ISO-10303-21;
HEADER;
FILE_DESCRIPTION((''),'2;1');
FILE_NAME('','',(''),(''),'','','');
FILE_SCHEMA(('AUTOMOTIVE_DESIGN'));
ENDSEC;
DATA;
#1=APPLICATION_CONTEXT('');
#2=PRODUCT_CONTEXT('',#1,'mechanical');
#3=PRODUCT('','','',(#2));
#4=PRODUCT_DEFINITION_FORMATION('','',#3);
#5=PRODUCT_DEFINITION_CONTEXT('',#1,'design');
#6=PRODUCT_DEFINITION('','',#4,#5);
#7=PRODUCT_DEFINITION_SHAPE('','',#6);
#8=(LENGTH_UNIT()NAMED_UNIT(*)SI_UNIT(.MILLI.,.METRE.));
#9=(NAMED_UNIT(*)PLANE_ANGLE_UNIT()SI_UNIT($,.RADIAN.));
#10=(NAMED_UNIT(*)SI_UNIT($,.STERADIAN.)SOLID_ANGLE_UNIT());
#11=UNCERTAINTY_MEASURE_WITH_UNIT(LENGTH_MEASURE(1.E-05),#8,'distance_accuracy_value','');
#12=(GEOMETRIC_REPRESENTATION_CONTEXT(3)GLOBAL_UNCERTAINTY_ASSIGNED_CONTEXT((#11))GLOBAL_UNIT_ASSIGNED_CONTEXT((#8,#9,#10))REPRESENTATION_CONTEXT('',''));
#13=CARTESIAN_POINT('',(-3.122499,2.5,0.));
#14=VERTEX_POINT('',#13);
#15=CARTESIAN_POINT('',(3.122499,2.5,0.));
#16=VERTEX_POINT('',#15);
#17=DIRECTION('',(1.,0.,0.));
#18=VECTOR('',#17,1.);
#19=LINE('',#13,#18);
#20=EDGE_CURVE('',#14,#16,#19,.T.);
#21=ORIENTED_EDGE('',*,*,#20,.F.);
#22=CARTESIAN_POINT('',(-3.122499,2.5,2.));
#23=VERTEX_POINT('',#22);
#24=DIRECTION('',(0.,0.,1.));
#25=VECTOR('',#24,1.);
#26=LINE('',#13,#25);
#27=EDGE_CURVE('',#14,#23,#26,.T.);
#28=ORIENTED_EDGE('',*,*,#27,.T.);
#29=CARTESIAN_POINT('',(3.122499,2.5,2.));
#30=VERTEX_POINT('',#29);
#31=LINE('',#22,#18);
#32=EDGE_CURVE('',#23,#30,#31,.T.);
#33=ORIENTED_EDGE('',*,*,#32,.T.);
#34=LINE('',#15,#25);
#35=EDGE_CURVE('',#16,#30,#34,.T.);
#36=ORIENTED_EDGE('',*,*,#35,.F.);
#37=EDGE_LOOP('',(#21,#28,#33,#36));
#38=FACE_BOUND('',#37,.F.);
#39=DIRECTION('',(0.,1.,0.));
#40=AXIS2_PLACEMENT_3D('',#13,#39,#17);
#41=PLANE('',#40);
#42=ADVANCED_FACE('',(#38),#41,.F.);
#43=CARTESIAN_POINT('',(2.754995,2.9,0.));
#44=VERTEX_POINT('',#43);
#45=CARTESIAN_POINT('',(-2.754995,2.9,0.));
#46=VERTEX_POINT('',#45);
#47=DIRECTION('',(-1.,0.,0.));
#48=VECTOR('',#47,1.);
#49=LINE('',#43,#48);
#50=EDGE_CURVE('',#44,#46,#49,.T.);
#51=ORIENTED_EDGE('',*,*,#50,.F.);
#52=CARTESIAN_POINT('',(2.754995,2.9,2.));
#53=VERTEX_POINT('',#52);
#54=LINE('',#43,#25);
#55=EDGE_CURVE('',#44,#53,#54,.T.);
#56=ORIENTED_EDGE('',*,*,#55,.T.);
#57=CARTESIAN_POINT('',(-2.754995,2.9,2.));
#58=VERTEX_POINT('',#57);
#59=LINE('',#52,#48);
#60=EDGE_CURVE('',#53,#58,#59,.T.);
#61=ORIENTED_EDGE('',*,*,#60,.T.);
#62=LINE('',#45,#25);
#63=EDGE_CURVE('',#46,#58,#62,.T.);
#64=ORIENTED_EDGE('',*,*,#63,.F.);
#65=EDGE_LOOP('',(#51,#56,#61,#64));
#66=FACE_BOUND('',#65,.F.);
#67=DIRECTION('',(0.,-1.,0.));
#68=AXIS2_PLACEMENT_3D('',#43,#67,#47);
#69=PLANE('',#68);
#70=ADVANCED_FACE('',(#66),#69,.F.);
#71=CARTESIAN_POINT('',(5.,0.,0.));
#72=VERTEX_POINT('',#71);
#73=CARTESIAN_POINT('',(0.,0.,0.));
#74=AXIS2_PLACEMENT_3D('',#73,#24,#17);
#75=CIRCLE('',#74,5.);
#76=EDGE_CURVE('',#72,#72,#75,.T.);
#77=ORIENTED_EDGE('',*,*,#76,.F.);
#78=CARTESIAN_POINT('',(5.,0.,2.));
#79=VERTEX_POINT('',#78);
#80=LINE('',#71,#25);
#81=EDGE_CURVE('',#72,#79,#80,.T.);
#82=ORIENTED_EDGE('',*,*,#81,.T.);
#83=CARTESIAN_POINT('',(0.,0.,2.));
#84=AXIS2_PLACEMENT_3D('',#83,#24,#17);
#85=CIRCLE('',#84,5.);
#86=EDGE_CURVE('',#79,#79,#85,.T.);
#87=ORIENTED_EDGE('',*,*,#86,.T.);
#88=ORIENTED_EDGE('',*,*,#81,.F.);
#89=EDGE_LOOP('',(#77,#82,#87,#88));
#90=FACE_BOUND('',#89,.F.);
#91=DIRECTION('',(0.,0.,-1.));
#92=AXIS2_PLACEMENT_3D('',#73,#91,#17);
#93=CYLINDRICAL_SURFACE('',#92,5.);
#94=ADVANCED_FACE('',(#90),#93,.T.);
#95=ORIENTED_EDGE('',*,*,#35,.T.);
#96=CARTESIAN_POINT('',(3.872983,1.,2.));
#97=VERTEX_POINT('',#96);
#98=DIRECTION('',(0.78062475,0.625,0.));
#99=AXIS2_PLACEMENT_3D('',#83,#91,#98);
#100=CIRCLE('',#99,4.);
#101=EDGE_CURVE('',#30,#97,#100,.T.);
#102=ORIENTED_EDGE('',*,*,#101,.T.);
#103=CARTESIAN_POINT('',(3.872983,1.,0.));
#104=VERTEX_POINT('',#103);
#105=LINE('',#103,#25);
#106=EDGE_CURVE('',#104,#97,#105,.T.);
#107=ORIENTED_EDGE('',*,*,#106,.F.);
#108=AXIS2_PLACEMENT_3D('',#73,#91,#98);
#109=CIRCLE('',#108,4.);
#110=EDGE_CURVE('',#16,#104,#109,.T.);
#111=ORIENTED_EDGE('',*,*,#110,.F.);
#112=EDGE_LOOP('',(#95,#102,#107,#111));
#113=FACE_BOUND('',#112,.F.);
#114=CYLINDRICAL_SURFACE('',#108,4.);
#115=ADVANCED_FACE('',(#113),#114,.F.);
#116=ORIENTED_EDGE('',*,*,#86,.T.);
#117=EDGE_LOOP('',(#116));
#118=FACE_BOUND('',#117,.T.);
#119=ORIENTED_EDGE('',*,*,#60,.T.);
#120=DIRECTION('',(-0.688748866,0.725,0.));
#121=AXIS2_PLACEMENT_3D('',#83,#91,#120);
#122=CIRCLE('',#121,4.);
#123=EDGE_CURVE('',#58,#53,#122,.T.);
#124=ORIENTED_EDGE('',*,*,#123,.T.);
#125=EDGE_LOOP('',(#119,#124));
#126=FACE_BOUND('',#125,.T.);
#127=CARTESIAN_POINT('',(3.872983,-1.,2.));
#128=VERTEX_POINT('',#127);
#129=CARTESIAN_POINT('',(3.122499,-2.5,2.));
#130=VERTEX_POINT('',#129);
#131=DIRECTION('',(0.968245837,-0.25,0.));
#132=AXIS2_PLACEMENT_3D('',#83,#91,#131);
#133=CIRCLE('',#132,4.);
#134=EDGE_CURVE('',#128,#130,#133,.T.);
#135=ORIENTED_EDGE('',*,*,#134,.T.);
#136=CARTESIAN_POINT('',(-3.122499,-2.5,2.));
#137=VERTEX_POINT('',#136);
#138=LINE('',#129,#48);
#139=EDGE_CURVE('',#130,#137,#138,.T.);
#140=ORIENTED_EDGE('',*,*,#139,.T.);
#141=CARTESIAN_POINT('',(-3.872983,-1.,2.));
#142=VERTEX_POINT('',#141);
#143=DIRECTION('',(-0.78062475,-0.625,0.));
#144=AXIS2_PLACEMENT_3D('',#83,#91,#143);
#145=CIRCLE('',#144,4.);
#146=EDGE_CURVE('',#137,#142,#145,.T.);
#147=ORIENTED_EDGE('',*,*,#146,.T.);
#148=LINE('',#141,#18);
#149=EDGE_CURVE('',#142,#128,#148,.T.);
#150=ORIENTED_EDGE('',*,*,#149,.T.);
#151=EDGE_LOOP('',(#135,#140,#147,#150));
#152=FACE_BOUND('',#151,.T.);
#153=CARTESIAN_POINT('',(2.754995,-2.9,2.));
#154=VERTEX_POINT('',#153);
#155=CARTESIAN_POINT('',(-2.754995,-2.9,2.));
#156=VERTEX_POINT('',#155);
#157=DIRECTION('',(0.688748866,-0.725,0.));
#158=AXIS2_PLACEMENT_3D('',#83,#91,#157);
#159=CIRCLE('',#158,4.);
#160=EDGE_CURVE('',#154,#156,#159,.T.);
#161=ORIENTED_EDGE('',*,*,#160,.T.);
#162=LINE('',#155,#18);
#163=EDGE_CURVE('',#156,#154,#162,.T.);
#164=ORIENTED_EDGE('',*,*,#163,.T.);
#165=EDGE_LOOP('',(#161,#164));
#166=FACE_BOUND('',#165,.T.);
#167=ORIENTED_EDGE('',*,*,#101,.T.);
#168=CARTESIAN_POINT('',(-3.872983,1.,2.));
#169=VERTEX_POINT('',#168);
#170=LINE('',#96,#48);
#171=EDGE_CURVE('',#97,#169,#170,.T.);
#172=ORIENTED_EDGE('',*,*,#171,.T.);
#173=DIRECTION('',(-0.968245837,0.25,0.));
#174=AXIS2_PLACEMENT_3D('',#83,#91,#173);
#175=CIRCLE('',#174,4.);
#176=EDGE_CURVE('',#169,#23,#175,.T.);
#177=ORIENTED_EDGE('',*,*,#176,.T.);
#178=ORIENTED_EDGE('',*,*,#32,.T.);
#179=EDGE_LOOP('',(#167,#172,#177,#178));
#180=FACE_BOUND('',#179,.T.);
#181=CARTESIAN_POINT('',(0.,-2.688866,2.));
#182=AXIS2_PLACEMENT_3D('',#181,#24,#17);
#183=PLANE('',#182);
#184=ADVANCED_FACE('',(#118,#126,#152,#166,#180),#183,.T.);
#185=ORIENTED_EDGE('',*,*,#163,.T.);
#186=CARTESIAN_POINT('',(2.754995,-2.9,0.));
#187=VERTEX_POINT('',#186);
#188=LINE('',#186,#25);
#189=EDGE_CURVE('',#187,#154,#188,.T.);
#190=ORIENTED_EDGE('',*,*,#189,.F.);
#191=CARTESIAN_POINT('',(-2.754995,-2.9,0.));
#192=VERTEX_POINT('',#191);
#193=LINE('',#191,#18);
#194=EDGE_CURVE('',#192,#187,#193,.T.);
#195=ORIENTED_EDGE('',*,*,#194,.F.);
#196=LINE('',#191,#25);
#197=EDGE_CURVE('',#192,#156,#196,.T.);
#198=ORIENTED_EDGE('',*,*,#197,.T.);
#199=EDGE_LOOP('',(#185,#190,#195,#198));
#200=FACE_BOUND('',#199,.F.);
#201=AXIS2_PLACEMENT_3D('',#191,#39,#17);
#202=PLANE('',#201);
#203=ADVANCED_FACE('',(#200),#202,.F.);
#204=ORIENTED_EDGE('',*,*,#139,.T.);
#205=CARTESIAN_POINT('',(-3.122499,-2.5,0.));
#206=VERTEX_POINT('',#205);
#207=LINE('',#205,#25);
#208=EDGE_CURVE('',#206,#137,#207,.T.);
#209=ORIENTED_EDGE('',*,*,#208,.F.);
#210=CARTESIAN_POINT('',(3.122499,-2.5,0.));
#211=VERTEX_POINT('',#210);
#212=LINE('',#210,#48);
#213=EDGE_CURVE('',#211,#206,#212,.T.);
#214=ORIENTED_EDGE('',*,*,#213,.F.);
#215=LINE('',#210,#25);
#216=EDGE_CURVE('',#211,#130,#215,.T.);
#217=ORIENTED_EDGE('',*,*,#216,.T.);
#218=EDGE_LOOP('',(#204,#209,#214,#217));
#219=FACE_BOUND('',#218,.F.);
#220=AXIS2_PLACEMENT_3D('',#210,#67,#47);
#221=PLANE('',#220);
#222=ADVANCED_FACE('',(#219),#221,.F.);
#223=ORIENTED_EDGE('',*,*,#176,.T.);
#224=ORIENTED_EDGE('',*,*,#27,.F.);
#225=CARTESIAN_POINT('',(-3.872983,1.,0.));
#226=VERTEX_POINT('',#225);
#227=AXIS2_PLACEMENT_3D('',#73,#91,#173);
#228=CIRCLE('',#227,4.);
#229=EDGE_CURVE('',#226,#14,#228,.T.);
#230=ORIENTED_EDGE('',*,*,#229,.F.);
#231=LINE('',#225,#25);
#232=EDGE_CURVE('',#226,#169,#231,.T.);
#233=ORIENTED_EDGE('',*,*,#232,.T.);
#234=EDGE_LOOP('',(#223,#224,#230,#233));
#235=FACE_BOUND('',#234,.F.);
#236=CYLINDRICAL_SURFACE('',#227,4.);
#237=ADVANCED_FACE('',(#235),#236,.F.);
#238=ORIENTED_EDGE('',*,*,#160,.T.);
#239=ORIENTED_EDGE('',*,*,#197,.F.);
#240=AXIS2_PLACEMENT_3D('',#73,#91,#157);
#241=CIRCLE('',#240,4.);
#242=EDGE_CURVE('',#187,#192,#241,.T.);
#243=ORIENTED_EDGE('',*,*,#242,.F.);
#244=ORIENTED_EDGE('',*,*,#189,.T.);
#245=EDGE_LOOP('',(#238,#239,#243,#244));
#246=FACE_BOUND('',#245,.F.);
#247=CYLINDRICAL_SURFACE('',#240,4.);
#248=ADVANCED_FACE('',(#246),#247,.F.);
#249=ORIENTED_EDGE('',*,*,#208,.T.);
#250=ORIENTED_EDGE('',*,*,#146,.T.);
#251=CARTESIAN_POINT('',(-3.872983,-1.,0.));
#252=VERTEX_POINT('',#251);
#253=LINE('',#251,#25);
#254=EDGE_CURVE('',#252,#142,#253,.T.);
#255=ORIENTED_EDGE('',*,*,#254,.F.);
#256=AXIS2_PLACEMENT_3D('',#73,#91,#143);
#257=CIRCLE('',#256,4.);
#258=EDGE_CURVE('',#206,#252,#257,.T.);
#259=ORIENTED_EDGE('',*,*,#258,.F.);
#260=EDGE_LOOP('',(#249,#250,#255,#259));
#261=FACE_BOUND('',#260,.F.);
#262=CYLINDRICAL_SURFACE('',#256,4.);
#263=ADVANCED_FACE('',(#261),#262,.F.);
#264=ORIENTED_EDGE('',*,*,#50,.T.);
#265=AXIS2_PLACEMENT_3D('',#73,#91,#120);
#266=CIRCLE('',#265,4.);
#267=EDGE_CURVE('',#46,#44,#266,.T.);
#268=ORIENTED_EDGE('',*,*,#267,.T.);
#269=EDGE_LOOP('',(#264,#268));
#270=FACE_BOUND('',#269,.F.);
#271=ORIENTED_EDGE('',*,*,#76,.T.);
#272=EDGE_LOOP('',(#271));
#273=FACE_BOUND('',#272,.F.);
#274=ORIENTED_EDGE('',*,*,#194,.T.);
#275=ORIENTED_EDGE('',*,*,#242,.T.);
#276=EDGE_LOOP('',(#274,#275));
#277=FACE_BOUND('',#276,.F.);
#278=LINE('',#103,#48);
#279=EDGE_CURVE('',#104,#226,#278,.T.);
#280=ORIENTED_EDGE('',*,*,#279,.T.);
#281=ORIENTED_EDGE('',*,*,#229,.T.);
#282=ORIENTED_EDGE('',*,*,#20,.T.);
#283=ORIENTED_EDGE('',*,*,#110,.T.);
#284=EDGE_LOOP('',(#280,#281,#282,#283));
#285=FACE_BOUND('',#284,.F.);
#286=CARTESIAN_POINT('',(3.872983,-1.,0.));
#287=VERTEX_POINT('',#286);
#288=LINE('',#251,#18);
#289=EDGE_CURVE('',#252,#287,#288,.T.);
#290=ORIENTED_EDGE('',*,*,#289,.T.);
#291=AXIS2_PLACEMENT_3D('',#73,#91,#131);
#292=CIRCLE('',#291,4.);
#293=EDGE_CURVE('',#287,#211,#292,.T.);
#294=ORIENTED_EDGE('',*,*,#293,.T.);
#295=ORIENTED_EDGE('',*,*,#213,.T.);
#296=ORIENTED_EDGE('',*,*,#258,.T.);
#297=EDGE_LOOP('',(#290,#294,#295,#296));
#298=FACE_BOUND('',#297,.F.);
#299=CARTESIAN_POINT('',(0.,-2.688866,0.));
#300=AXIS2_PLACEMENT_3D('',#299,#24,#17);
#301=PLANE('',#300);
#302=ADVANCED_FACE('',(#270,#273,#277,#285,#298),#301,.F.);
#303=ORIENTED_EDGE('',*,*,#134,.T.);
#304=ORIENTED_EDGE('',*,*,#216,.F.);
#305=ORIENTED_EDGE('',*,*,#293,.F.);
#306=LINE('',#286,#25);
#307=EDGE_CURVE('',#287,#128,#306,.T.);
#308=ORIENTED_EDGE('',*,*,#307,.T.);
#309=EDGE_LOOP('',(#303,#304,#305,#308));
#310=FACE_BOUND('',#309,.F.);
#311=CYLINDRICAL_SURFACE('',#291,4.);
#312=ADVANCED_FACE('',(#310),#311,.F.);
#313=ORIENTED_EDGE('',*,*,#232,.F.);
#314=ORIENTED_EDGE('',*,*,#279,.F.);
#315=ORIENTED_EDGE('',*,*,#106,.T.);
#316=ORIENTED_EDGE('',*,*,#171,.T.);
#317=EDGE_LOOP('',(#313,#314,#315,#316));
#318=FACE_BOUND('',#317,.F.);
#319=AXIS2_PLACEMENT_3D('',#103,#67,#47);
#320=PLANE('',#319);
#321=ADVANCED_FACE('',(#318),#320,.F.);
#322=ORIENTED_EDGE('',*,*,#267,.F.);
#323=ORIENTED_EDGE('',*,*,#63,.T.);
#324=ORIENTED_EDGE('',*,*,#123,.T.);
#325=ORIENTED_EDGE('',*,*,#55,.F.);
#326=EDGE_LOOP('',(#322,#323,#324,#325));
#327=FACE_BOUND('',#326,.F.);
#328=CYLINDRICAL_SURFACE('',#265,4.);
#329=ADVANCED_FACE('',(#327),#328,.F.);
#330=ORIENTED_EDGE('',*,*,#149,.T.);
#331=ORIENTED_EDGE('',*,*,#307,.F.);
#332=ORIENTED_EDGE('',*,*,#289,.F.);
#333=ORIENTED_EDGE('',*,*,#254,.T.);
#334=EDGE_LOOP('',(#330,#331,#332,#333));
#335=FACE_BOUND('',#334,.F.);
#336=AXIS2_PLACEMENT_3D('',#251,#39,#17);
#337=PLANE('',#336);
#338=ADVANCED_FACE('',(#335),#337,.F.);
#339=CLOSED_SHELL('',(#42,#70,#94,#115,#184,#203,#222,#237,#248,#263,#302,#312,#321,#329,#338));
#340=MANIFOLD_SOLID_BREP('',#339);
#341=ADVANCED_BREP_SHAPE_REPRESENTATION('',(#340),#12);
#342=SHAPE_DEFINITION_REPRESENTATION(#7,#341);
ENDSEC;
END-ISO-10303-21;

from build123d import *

# Parameters (mm, degrees)
F0_R     = 5
F1_DEPTH = 2
F2_DEPTH = 2
F3_DEPTH = 2
F4_DEPTH = 2


with BuildPart() as f1:
    # F0 (on Top) → F1 (new body)
    with BuildSketch(Plane.XY):
        Circle(F0_R)
        with BuildLine():
            ThreePointArc((3.8729833462, 1), (3.9681187851, 0.5040171699), (4, 0))
            ThreePointArc((4, 0), (3.9681187851, -0.5040171699), (3.8729833462, -1))
            ThreePointArc((3.8729833462, -1), (3.5772466103, -1.789778391), (3.1224989992, -2.5))
            ThreePointArc((3.1224989992, -2.5), (2.9455449899, -2.7062455011), (2.7549954628, -2.9))
            ThreePointArc((2.7549954628, -2.9), (0, -4), (-2.7549954628, -2.9))
            ThreePointArc((-2.7549954628, -2.9), (-2.9455449899, -2.7062455011), (-3.1224989992, -2.5))
            ThreePointArc((-3.1224989992, -2.5), (-3.5772466103, -1.789778391), (-3.8729833462, -1))
            ThreePointArc((-3.8729833462, -1), (-4, 0), (-3.8729833462, 1))
            ThreePointArc((-3.8729833462, 1), (-3.5772466103, 1.789778391), (-3.1224989992, 2.5))
            ThreePointArc((-3.1224989992, 2.5), (-2.9455449899, 2.7062455011), (-2.7549954628, 2.9))
            ThreePointArc((-2.7549954628, 2.9), (0, 4), (2.7549954628, 2.9))
            ThreePointArc((2.7549954628, 2.9), (2.9455449899, 2.7062455011), (3.1224989992, 2.5))
            ThreePointArc((3.1224989992, 2.5), (3.5772466103, 1.789778391), (3.8729833462, 1))
        make_face(mode=Mode.SUBTRACT)
    extrude(amount=F1_DEPTH)

    # F0 (on Top) → F2 (join)
    with BuildSketch(Plane.XY):
        with BuildLine():
            ThreePointArc((3.8729833462, -1), (3.9681187851, -0.5040171699), (4, 0))
            ThreePointArc((4, 0), (3.9681187851, 0.5040171699), (3.8729833462, 1))
            Line((3.8729833462, 1), (-2.1040285937, 1))
            Line((-2.1040285937, 1), (-3.8729833462, 1))
            ThreePointArc((-3.8729833462, 1), (-4, 0), (-3.8729833462, -1))
            Line((-3.8729833462, -1), (-2.1040285937, -1))
            Line((-2.1040285937, -1), (3.8729833462, -1))
        make_face()
    extrude(amount=F2_DEPTH)

    # F0 (on Top) → F3 (join)
    with BuildSketch(Plane.XY):
        with BuildLine():
            Line((-2.1040285937, 2.5), (3.1224989992, 2.5))
            ThreePointArc((3.1224989992, 2.5), (2.9455449899, 2.7062455011), (2.7549954628, 2.9))
            Line((2.7549954628, 2.9), (-0.8741539787, 2.9))
            Line((-0.8741539787, 2.9), (-2.7549954628, 2.9))
            ThreePointArc((-2.7549954628, 2.9), (-2.9455449899, 2.7062455011), (-3.1224989992, 2.5))
            Line((-3.1224989992, 2.5), (-2.1040285937, 2.5))
        make_face()
    extrude(amount=F3_DEPTH)

    # F0 (on Top) → F4 (join)
    with BuildSketch(Plane.XY):
        with BuildLine():
            ThreePointArc((2.7549954628, -2.9), (2.9455449899, -2.7062455011), (3.1224989992, -2.5))
            Line((3.1224989992, -2.5), (-2.1040285937, -2.5))
            Line((-2.1040285937, -2.5), (-3.1224989992, -2.5))
            ThreePointArc((-3.1224989992, -2.5), (-2.9455449899, -2.7062455011), (-2.7549954628, -2.9))
            Line((-2.7549954628, -2.9), (-1.2980791507, -2.9))
            Line((-1.2980791507, -2.9), (2.7549954628, -2.9))
        make_face()
    extrude(amount=F4_DEPTH)


solid = f1.part
